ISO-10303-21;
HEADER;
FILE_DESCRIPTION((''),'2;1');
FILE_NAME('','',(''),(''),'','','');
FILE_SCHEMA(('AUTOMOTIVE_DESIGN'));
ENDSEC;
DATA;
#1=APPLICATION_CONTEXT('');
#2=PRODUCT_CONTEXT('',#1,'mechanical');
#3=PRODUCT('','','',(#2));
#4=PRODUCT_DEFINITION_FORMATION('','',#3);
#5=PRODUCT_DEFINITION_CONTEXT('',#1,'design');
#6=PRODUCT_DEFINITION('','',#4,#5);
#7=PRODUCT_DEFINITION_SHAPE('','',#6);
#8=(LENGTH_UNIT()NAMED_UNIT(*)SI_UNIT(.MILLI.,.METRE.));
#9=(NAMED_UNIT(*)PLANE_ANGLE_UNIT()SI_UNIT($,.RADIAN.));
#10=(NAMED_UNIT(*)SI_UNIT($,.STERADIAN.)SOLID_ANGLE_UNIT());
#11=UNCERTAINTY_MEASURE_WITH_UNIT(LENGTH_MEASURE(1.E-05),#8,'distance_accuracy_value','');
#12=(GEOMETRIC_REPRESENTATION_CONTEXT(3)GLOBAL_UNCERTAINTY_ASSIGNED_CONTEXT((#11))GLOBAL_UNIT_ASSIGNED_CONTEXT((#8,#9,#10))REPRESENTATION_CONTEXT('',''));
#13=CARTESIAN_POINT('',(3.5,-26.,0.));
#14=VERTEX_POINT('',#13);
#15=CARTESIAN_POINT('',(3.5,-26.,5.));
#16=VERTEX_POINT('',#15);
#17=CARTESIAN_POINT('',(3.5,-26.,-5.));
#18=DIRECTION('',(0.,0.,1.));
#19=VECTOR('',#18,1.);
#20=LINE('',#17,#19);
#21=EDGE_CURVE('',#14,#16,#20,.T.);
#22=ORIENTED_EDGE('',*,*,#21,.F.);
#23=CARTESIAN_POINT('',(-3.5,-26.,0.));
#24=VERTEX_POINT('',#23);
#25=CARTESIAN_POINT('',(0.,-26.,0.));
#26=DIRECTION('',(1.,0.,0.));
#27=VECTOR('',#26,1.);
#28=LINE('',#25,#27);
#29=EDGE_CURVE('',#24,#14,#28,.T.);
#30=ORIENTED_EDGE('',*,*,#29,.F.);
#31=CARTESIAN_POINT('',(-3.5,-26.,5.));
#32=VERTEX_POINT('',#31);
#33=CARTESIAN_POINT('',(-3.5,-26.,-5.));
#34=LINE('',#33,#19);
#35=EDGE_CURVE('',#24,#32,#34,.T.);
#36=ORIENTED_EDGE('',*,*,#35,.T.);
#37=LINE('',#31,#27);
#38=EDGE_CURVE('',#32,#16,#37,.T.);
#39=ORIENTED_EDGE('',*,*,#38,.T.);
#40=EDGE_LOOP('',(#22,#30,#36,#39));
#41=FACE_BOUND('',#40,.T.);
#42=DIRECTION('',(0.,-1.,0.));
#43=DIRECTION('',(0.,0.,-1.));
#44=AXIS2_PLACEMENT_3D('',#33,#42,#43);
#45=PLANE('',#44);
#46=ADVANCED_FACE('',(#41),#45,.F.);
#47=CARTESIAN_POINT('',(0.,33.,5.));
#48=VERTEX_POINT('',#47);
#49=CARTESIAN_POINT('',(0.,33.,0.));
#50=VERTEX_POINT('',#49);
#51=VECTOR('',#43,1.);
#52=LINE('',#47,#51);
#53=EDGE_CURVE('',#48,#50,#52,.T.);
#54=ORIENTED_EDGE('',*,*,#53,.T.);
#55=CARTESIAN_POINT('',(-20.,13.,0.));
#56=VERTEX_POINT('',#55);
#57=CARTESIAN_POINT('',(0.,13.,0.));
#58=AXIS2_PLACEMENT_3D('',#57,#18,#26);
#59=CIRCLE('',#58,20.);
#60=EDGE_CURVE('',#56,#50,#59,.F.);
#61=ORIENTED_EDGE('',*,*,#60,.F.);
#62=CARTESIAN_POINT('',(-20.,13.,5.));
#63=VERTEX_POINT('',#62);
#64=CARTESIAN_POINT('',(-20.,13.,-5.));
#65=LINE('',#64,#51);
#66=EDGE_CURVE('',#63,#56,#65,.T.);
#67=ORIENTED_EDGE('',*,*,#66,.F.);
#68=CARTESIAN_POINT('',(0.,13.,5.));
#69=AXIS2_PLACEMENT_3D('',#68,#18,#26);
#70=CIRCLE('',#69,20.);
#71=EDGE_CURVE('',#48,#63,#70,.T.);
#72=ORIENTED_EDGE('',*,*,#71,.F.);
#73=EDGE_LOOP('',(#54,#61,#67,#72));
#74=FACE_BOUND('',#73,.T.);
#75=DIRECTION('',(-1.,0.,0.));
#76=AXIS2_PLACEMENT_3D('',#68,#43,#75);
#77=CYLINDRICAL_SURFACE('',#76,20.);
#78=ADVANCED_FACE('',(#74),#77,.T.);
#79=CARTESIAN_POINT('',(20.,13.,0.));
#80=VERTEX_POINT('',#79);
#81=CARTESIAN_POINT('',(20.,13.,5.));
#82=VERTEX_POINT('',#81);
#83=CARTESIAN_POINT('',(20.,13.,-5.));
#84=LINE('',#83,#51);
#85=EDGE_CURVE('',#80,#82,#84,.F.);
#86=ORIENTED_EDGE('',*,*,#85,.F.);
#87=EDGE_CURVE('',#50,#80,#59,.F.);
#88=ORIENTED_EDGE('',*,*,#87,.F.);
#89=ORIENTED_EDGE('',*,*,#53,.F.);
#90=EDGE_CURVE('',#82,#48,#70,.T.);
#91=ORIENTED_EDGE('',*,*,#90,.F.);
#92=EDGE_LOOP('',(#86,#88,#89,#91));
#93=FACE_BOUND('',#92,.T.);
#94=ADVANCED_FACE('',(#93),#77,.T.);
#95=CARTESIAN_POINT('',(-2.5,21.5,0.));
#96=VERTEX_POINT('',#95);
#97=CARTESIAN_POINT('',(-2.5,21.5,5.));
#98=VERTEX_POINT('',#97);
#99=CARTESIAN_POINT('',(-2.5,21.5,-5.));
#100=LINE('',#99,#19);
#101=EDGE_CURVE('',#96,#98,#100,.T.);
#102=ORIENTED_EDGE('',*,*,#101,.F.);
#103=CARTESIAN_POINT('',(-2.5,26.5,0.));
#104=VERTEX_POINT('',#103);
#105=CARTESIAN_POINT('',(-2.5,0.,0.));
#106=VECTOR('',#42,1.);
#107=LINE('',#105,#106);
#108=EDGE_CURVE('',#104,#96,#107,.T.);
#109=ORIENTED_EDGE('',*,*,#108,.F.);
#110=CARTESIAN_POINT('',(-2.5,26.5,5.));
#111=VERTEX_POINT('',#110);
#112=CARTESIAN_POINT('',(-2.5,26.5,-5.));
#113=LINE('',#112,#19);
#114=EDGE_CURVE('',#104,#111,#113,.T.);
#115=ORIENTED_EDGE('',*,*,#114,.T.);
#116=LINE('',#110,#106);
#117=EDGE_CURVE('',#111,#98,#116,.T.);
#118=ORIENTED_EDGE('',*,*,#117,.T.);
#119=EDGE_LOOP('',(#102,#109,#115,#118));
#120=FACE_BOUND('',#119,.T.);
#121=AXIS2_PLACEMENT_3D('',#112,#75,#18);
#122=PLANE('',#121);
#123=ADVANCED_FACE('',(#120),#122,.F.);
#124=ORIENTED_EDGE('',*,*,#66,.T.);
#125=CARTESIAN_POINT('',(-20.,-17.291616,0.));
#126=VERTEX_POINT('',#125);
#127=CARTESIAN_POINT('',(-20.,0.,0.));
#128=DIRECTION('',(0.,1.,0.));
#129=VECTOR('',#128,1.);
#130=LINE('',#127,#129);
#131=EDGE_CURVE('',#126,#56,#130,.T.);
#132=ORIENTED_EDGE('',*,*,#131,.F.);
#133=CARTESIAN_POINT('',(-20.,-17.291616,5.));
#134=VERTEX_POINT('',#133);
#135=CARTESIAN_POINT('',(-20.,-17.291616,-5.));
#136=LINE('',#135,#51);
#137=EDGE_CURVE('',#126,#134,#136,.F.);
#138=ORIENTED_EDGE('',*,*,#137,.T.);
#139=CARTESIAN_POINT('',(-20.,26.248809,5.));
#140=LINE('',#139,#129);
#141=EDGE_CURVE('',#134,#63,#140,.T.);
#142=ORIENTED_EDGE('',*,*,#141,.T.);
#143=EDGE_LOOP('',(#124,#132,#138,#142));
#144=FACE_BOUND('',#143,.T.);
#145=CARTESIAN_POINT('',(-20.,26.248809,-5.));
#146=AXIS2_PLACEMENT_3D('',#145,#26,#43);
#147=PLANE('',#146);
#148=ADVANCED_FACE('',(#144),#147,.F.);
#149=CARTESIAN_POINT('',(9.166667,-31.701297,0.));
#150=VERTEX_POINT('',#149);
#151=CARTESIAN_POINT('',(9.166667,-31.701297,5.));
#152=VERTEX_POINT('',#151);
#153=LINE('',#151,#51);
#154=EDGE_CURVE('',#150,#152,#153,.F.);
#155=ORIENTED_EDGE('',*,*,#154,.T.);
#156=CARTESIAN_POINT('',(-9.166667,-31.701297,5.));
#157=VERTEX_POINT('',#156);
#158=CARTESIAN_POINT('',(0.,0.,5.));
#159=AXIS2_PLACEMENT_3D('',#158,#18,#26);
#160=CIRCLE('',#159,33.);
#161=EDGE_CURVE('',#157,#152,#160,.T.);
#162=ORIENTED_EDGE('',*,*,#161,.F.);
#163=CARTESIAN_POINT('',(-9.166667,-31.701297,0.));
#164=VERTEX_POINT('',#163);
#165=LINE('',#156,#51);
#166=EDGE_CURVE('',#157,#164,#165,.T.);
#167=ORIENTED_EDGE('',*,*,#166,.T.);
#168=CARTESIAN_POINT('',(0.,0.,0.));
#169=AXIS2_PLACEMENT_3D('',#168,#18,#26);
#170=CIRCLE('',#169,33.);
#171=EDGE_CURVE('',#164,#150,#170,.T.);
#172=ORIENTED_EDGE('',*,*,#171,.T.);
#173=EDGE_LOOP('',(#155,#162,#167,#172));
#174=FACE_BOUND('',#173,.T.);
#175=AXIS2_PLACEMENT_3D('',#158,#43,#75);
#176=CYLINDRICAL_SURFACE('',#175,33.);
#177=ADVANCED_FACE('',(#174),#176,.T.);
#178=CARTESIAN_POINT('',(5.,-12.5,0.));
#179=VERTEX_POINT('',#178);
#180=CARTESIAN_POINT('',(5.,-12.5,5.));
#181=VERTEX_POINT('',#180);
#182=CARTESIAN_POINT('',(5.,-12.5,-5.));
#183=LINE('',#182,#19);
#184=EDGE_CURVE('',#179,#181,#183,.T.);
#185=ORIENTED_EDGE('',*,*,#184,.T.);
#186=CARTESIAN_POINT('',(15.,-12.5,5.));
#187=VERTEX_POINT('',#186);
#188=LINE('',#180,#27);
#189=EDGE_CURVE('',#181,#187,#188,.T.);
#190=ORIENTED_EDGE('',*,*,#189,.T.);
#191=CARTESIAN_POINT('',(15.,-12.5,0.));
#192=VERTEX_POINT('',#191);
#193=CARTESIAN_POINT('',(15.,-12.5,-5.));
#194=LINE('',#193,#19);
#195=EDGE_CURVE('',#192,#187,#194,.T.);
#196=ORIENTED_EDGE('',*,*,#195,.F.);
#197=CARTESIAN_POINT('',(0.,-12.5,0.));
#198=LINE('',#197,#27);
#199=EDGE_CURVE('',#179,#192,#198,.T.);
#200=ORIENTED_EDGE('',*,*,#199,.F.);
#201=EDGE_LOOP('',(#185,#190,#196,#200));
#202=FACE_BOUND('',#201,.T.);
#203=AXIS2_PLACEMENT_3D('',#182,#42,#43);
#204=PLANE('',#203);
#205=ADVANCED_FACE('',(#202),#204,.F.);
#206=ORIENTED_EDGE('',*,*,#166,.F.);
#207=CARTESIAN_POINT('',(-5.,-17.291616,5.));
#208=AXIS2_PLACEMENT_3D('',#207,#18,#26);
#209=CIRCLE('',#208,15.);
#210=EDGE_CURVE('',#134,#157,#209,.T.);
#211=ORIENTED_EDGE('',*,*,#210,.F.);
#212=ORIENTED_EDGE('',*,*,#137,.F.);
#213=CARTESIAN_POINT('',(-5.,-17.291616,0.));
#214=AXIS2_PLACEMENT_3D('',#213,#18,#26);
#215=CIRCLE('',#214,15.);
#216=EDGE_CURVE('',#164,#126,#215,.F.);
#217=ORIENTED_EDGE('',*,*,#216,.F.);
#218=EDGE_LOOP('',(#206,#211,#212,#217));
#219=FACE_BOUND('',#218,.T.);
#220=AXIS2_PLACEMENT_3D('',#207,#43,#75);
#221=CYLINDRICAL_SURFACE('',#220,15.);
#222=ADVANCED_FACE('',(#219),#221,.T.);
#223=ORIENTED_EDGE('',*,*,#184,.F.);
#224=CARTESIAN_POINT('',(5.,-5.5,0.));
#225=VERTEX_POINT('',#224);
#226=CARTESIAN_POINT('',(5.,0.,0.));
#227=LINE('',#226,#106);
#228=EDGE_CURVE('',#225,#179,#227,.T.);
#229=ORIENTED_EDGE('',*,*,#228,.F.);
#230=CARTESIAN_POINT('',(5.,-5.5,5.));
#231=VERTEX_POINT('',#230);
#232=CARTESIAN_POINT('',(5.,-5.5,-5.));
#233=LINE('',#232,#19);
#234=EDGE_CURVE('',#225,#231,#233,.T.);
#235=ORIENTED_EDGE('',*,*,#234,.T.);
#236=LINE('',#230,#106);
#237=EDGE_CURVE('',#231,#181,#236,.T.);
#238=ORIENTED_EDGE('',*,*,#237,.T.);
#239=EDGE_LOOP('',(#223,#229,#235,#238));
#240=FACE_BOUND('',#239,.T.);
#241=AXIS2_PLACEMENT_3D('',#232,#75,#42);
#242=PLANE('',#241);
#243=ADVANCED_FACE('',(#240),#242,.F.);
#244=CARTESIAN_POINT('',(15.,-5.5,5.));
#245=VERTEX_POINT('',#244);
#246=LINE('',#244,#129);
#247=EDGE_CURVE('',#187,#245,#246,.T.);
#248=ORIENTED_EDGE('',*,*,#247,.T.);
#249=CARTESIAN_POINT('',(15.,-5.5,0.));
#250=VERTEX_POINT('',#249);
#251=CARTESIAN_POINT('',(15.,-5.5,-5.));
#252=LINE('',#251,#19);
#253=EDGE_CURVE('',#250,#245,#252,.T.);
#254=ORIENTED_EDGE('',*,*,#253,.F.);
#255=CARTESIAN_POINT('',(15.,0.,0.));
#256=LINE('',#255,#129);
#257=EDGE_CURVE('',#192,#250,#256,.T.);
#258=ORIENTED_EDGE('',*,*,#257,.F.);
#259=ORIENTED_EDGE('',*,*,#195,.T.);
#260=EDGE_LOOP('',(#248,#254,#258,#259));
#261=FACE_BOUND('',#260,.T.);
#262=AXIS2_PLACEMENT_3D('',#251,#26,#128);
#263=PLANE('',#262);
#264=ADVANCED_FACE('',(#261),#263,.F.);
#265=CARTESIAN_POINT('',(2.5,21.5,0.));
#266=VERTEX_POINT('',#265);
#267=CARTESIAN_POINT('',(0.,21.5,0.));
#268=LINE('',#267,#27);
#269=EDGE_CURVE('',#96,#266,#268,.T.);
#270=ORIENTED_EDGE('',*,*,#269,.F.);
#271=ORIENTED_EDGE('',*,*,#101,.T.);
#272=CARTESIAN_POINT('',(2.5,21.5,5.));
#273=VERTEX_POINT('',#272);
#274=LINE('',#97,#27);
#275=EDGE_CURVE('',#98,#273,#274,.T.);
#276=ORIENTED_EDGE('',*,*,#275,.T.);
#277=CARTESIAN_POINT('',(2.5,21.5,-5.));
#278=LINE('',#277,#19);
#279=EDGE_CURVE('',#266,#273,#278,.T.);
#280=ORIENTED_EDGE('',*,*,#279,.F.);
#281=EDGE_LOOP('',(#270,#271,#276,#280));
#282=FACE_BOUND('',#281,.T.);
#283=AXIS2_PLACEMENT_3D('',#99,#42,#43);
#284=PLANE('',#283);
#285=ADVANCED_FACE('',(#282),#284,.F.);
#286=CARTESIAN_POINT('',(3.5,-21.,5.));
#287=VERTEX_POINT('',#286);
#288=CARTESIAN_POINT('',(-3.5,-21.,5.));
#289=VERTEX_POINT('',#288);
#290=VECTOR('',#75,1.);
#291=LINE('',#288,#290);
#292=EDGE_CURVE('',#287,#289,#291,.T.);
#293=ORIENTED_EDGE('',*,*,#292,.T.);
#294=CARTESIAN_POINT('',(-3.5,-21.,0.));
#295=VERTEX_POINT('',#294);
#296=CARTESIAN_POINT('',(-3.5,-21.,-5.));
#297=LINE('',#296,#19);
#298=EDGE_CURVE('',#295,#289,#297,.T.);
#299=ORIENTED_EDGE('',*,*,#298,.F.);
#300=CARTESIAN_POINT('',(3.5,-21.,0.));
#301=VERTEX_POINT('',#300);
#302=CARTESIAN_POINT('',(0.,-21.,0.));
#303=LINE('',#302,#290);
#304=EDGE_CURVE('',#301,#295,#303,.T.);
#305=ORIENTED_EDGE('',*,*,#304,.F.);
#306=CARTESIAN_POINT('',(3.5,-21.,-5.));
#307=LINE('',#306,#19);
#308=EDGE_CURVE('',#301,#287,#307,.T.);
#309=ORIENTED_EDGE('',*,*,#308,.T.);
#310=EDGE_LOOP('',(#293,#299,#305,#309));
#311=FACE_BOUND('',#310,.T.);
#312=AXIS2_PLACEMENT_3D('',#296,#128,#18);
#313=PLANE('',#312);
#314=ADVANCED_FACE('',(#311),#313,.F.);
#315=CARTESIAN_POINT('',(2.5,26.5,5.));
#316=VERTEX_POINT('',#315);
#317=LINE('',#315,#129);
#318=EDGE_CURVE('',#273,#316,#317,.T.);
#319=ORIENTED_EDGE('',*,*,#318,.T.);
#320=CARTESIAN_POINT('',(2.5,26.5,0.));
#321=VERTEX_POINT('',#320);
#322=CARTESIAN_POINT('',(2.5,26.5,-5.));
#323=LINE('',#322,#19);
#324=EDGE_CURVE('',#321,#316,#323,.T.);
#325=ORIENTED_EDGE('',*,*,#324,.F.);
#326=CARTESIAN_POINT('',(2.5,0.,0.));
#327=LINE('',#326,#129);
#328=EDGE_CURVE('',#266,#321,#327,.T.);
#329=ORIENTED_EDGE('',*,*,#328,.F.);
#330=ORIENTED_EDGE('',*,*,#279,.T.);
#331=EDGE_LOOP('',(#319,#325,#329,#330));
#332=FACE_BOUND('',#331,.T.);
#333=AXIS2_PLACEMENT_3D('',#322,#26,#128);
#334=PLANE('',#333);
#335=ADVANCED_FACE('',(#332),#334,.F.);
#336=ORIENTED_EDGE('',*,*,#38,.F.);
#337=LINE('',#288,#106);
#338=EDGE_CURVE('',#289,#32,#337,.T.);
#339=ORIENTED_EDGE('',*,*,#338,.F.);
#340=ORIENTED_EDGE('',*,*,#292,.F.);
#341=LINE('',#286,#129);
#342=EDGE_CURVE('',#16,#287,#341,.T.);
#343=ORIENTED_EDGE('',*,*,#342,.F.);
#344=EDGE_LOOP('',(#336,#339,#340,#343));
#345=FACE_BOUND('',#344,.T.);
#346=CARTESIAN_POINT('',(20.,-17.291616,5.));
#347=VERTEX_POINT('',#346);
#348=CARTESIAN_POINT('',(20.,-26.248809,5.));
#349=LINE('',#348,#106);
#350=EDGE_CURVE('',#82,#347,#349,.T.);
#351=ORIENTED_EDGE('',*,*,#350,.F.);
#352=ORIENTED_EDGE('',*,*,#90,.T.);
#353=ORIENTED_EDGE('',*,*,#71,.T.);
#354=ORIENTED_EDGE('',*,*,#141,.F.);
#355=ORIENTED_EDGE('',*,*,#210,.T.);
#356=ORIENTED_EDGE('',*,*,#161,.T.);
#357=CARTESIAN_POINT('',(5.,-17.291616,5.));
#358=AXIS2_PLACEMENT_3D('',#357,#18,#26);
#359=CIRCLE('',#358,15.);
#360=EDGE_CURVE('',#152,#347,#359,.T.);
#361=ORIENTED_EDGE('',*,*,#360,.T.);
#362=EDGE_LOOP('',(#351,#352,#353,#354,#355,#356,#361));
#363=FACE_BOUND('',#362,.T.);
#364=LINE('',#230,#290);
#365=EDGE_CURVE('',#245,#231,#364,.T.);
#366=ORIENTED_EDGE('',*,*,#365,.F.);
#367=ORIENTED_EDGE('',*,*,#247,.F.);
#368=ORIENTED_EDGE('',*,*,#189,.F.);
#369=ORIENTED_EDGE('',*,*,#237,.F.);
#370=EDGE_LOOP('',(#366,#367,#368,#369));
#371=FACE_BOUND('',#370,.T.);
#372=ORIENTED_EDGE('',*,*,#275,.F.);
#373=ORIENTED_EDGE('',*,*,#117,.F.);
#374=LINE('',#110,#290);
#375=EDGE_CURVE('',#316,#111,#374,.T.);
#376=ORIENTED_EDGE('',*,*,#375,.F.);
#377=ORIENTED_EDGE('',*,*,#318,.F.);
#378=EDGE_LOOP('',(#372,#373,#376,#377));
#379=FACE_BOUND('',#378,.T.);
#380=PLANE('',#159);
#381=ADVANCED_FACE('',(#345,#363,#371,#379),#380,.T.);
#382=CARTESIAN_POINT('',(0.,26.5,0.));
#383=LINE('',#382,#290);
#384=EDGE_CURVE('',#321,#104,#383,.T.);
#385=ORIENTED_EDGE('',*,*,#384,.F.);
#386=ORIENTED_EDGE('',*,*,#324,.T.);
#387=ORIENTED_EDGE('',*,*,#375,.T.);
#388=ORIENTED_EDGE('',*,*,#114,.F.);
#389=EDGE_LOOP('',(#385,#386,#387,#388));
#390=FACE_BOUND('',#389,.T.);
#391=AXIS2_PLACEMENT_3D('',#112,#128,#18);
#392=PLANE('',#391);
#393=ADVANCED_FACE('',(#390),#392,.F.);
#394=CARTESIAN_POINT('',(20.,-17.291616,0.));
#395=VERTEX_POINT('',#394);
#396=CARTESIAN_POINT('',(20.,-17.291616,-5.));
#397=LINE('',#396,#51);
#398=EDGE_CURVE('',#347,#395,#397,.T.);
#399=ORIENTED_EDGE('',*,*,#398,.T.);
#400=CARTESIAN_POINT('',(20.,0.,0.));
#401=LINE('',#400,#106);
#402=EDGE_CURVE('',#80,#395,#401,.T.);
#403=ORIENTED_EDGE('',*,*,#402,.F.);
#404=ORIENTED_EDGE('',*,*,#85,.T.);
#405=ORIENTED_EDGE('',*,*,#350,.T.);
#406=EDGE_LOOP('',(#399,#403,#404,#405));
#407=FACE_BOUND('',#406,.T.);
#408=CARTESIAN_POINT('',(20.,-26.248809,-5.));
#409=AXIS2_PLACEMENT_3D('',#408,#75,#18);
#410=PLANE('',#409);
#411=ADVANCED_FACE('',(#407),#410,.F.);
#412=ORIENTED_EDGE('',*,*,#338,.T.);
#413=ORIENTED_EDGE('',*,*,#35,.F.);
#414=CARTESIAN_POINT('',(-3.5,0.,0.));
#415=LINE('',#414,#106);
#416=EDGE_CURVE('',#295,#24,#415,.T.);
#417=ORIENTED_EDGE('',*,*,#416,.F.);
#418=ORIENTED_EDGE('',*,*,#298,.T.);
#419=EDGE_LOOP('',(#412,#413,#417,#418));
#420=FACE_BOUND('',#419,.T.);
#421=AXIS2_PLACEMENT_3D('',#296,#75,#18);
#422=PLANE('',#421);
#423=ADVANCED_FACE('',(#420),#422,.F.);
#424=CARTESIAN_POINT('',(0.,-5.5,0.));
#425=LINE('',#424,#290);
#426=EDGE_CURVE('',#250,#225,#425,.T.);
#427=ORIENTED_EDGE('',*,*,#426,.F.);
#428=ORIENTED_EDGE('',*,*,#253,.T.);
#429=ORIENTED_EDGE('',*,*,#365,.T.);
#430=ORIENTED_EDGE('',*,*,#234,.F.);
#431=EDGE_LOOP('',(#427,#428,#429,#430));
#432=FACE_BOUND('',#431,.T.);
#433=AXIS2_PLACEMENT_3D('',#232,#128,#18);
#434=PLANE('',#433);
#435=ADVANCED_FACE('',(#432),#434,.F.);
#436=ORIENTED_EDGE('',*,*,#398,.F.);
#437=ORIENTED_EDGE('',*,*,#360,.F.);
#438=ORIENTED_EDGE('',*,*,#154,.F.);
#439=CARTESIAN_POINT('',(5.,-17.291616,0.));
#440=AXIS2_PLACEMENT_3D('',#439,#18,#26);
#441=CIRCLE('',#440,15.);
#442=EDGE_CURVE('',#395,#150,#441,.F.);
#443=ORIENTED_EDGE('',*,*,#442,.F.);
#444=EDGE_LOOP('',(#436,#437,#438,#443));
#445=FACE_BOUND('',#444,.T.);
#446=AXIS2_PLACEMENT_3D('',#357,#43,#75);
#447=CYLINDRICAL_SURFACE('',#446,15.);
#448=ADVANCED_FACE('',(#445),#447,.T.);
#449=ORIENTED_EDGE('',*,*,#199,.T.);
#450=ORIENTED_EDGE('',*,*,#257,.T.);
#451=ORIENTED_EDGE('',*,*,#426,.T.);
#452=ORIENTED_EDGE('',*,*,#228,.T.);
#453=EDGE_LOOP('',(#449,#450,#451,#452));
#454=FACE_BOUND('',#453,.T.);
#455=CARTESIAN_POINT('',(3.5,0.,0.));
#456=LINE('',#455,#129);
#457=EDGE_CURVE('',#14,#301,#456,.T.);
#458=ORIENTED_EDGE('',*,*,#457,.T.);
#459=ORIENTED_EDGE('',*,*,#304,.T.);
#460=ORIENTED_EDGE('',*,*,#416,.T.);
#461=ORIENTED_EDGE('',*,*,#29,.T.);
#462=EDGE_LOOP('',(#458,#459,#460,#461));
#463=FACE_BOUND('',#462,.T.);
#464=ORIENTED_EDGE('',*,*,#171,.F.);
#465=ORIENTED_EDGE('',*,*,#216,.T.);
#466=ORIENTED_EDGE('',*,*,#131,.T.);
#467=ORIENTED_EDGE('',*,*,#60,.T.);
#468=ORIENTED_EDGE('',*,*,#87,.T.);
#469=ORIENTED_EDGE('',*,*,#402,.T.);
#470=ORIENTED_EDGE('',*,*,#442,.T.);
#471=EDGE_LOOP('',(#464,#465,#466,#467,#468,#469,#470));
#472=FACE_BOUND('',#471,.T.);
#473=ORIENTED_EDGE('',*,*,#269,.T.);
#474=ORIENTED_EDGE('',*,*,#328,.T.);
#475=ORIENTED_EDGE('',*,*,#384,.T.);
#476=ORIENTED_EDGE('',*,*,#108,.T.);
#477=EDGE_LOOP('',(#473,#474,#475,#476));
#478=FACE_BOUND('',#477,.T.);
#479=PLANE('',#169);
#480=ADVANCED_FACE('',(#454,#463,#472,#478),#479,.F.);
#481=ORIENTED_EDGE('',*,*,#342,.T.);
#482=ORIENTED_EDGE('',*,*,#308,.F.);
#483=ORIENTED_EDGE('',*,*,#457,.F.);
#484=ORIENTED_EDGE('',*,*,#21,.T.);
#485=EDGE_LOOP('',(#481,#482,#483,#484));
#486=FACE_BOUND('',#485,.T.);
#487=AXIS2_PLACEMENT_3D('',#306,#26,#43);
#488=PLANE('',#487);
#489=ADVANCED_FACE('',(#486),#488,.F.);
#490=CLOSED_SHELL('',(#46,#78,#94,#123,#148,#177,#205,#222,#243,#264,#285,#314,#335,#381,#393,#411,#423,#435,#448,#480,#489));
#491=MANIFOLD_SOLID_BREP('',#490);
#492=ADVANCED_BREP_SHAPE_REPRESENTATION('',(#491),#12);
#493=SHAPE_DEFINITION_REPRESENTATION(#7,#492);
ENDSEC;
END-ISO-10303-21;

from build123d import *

# Parameters (mm, degrees)
SKETCH1_R           = 33
BOSS_EXTRUDE1_DEPTH = 5
CUT_EXTRUDE3_START  = -10
CUT_EXTRUDE3_DEPTH  = 10
FILLET2_R           = 20
FILLET3_R           = 15
SKETCH7_W           = 5
SKETCH7_H           = 5
SKETCH7_W_2         = 7
CUT_EXTRUDE4_DEPTH  = 10
SKETCH8_W           = 10
SKETCH8_H           = 7
CUT_EXTRUDE5_DEPTH  = 10


with BuildPart() as part:
    # Sketch1 → Boss-Extrude1 (new body)
    with BuildSketch(Plane.XY):
        Circle(SKETCH1_R)
    extrude(amount=BOSS_EXTRUDE1_DEPTH)

    # Sketch6 → Cut-Extrude3 (cut)
    with BuildSketch(Plane.XY.offset(5).offset(CUT_EXTRUDE3_START)):
        with BuildLine():
            Line((-20, 26.248809497), (-20, -26.248809497))
            ThreePointArc((-20, -26.248809497), (-33, 0), (-20, 26.248809497))
        make_face()
        with BuildLine():
            Line((20, -26.248809497), (20, 26.248809497))
            ThreePointArc((20, 26.248809497), (33, 0), (20, -26.248809497))
        make_face()
    extrude(amount=CUT_EXTRUDE3_DEPTH, mode=Mode.SUBTRACT)

    # Fillet2
    fillet2_edges = [part.edges().sort_by_distance(p)[0] for p in [
        (-20, 26.248809497, 2.5),
        (20, 26.248809497, 2.5),
    ]]
    fillet(fillet2_edges, radius=FILLET2_R - 0.0001)  # a hair under: the kernel refuses the full size

    # Fillet3
    fillet3_edges = [part.edges().sort_by_distance(p)[0] for p in [
        (-20, -26.248809497, 2.5),
        (20, -26.248809497, 2.5),
    ]]
    fillet(fillet3_edges, radius=FILLET3_R)

    # Sketch7 → Cut-Extrude4 (cut)
    with BuildSketch(Plane.XY.offset(5)):
        with Locations((0, 24)):
            Rectangle(SKETCH7_W, SKETCH7_H)
        with Locations((0, -23.5)):
            Rectangle(SKETCH7_W_2, SKETCH7_H)
    extrude(amount=-CUT_EXTRUDE4_DEPTH, mode=Mode.SUBTRACT)

    # Sketch8 → Cut-Extrude5 (cut)
    with BuildSketch(Plane.XY.offset(5)):
        with Locations((10, -9)):
            Rectangle(SKETCH8_W, SKETCH8_H)
    extrude(amount=-CUT_EXTRUDE5_DEPTH, mode=Mode.SUBTRACT)


solid = part.part
